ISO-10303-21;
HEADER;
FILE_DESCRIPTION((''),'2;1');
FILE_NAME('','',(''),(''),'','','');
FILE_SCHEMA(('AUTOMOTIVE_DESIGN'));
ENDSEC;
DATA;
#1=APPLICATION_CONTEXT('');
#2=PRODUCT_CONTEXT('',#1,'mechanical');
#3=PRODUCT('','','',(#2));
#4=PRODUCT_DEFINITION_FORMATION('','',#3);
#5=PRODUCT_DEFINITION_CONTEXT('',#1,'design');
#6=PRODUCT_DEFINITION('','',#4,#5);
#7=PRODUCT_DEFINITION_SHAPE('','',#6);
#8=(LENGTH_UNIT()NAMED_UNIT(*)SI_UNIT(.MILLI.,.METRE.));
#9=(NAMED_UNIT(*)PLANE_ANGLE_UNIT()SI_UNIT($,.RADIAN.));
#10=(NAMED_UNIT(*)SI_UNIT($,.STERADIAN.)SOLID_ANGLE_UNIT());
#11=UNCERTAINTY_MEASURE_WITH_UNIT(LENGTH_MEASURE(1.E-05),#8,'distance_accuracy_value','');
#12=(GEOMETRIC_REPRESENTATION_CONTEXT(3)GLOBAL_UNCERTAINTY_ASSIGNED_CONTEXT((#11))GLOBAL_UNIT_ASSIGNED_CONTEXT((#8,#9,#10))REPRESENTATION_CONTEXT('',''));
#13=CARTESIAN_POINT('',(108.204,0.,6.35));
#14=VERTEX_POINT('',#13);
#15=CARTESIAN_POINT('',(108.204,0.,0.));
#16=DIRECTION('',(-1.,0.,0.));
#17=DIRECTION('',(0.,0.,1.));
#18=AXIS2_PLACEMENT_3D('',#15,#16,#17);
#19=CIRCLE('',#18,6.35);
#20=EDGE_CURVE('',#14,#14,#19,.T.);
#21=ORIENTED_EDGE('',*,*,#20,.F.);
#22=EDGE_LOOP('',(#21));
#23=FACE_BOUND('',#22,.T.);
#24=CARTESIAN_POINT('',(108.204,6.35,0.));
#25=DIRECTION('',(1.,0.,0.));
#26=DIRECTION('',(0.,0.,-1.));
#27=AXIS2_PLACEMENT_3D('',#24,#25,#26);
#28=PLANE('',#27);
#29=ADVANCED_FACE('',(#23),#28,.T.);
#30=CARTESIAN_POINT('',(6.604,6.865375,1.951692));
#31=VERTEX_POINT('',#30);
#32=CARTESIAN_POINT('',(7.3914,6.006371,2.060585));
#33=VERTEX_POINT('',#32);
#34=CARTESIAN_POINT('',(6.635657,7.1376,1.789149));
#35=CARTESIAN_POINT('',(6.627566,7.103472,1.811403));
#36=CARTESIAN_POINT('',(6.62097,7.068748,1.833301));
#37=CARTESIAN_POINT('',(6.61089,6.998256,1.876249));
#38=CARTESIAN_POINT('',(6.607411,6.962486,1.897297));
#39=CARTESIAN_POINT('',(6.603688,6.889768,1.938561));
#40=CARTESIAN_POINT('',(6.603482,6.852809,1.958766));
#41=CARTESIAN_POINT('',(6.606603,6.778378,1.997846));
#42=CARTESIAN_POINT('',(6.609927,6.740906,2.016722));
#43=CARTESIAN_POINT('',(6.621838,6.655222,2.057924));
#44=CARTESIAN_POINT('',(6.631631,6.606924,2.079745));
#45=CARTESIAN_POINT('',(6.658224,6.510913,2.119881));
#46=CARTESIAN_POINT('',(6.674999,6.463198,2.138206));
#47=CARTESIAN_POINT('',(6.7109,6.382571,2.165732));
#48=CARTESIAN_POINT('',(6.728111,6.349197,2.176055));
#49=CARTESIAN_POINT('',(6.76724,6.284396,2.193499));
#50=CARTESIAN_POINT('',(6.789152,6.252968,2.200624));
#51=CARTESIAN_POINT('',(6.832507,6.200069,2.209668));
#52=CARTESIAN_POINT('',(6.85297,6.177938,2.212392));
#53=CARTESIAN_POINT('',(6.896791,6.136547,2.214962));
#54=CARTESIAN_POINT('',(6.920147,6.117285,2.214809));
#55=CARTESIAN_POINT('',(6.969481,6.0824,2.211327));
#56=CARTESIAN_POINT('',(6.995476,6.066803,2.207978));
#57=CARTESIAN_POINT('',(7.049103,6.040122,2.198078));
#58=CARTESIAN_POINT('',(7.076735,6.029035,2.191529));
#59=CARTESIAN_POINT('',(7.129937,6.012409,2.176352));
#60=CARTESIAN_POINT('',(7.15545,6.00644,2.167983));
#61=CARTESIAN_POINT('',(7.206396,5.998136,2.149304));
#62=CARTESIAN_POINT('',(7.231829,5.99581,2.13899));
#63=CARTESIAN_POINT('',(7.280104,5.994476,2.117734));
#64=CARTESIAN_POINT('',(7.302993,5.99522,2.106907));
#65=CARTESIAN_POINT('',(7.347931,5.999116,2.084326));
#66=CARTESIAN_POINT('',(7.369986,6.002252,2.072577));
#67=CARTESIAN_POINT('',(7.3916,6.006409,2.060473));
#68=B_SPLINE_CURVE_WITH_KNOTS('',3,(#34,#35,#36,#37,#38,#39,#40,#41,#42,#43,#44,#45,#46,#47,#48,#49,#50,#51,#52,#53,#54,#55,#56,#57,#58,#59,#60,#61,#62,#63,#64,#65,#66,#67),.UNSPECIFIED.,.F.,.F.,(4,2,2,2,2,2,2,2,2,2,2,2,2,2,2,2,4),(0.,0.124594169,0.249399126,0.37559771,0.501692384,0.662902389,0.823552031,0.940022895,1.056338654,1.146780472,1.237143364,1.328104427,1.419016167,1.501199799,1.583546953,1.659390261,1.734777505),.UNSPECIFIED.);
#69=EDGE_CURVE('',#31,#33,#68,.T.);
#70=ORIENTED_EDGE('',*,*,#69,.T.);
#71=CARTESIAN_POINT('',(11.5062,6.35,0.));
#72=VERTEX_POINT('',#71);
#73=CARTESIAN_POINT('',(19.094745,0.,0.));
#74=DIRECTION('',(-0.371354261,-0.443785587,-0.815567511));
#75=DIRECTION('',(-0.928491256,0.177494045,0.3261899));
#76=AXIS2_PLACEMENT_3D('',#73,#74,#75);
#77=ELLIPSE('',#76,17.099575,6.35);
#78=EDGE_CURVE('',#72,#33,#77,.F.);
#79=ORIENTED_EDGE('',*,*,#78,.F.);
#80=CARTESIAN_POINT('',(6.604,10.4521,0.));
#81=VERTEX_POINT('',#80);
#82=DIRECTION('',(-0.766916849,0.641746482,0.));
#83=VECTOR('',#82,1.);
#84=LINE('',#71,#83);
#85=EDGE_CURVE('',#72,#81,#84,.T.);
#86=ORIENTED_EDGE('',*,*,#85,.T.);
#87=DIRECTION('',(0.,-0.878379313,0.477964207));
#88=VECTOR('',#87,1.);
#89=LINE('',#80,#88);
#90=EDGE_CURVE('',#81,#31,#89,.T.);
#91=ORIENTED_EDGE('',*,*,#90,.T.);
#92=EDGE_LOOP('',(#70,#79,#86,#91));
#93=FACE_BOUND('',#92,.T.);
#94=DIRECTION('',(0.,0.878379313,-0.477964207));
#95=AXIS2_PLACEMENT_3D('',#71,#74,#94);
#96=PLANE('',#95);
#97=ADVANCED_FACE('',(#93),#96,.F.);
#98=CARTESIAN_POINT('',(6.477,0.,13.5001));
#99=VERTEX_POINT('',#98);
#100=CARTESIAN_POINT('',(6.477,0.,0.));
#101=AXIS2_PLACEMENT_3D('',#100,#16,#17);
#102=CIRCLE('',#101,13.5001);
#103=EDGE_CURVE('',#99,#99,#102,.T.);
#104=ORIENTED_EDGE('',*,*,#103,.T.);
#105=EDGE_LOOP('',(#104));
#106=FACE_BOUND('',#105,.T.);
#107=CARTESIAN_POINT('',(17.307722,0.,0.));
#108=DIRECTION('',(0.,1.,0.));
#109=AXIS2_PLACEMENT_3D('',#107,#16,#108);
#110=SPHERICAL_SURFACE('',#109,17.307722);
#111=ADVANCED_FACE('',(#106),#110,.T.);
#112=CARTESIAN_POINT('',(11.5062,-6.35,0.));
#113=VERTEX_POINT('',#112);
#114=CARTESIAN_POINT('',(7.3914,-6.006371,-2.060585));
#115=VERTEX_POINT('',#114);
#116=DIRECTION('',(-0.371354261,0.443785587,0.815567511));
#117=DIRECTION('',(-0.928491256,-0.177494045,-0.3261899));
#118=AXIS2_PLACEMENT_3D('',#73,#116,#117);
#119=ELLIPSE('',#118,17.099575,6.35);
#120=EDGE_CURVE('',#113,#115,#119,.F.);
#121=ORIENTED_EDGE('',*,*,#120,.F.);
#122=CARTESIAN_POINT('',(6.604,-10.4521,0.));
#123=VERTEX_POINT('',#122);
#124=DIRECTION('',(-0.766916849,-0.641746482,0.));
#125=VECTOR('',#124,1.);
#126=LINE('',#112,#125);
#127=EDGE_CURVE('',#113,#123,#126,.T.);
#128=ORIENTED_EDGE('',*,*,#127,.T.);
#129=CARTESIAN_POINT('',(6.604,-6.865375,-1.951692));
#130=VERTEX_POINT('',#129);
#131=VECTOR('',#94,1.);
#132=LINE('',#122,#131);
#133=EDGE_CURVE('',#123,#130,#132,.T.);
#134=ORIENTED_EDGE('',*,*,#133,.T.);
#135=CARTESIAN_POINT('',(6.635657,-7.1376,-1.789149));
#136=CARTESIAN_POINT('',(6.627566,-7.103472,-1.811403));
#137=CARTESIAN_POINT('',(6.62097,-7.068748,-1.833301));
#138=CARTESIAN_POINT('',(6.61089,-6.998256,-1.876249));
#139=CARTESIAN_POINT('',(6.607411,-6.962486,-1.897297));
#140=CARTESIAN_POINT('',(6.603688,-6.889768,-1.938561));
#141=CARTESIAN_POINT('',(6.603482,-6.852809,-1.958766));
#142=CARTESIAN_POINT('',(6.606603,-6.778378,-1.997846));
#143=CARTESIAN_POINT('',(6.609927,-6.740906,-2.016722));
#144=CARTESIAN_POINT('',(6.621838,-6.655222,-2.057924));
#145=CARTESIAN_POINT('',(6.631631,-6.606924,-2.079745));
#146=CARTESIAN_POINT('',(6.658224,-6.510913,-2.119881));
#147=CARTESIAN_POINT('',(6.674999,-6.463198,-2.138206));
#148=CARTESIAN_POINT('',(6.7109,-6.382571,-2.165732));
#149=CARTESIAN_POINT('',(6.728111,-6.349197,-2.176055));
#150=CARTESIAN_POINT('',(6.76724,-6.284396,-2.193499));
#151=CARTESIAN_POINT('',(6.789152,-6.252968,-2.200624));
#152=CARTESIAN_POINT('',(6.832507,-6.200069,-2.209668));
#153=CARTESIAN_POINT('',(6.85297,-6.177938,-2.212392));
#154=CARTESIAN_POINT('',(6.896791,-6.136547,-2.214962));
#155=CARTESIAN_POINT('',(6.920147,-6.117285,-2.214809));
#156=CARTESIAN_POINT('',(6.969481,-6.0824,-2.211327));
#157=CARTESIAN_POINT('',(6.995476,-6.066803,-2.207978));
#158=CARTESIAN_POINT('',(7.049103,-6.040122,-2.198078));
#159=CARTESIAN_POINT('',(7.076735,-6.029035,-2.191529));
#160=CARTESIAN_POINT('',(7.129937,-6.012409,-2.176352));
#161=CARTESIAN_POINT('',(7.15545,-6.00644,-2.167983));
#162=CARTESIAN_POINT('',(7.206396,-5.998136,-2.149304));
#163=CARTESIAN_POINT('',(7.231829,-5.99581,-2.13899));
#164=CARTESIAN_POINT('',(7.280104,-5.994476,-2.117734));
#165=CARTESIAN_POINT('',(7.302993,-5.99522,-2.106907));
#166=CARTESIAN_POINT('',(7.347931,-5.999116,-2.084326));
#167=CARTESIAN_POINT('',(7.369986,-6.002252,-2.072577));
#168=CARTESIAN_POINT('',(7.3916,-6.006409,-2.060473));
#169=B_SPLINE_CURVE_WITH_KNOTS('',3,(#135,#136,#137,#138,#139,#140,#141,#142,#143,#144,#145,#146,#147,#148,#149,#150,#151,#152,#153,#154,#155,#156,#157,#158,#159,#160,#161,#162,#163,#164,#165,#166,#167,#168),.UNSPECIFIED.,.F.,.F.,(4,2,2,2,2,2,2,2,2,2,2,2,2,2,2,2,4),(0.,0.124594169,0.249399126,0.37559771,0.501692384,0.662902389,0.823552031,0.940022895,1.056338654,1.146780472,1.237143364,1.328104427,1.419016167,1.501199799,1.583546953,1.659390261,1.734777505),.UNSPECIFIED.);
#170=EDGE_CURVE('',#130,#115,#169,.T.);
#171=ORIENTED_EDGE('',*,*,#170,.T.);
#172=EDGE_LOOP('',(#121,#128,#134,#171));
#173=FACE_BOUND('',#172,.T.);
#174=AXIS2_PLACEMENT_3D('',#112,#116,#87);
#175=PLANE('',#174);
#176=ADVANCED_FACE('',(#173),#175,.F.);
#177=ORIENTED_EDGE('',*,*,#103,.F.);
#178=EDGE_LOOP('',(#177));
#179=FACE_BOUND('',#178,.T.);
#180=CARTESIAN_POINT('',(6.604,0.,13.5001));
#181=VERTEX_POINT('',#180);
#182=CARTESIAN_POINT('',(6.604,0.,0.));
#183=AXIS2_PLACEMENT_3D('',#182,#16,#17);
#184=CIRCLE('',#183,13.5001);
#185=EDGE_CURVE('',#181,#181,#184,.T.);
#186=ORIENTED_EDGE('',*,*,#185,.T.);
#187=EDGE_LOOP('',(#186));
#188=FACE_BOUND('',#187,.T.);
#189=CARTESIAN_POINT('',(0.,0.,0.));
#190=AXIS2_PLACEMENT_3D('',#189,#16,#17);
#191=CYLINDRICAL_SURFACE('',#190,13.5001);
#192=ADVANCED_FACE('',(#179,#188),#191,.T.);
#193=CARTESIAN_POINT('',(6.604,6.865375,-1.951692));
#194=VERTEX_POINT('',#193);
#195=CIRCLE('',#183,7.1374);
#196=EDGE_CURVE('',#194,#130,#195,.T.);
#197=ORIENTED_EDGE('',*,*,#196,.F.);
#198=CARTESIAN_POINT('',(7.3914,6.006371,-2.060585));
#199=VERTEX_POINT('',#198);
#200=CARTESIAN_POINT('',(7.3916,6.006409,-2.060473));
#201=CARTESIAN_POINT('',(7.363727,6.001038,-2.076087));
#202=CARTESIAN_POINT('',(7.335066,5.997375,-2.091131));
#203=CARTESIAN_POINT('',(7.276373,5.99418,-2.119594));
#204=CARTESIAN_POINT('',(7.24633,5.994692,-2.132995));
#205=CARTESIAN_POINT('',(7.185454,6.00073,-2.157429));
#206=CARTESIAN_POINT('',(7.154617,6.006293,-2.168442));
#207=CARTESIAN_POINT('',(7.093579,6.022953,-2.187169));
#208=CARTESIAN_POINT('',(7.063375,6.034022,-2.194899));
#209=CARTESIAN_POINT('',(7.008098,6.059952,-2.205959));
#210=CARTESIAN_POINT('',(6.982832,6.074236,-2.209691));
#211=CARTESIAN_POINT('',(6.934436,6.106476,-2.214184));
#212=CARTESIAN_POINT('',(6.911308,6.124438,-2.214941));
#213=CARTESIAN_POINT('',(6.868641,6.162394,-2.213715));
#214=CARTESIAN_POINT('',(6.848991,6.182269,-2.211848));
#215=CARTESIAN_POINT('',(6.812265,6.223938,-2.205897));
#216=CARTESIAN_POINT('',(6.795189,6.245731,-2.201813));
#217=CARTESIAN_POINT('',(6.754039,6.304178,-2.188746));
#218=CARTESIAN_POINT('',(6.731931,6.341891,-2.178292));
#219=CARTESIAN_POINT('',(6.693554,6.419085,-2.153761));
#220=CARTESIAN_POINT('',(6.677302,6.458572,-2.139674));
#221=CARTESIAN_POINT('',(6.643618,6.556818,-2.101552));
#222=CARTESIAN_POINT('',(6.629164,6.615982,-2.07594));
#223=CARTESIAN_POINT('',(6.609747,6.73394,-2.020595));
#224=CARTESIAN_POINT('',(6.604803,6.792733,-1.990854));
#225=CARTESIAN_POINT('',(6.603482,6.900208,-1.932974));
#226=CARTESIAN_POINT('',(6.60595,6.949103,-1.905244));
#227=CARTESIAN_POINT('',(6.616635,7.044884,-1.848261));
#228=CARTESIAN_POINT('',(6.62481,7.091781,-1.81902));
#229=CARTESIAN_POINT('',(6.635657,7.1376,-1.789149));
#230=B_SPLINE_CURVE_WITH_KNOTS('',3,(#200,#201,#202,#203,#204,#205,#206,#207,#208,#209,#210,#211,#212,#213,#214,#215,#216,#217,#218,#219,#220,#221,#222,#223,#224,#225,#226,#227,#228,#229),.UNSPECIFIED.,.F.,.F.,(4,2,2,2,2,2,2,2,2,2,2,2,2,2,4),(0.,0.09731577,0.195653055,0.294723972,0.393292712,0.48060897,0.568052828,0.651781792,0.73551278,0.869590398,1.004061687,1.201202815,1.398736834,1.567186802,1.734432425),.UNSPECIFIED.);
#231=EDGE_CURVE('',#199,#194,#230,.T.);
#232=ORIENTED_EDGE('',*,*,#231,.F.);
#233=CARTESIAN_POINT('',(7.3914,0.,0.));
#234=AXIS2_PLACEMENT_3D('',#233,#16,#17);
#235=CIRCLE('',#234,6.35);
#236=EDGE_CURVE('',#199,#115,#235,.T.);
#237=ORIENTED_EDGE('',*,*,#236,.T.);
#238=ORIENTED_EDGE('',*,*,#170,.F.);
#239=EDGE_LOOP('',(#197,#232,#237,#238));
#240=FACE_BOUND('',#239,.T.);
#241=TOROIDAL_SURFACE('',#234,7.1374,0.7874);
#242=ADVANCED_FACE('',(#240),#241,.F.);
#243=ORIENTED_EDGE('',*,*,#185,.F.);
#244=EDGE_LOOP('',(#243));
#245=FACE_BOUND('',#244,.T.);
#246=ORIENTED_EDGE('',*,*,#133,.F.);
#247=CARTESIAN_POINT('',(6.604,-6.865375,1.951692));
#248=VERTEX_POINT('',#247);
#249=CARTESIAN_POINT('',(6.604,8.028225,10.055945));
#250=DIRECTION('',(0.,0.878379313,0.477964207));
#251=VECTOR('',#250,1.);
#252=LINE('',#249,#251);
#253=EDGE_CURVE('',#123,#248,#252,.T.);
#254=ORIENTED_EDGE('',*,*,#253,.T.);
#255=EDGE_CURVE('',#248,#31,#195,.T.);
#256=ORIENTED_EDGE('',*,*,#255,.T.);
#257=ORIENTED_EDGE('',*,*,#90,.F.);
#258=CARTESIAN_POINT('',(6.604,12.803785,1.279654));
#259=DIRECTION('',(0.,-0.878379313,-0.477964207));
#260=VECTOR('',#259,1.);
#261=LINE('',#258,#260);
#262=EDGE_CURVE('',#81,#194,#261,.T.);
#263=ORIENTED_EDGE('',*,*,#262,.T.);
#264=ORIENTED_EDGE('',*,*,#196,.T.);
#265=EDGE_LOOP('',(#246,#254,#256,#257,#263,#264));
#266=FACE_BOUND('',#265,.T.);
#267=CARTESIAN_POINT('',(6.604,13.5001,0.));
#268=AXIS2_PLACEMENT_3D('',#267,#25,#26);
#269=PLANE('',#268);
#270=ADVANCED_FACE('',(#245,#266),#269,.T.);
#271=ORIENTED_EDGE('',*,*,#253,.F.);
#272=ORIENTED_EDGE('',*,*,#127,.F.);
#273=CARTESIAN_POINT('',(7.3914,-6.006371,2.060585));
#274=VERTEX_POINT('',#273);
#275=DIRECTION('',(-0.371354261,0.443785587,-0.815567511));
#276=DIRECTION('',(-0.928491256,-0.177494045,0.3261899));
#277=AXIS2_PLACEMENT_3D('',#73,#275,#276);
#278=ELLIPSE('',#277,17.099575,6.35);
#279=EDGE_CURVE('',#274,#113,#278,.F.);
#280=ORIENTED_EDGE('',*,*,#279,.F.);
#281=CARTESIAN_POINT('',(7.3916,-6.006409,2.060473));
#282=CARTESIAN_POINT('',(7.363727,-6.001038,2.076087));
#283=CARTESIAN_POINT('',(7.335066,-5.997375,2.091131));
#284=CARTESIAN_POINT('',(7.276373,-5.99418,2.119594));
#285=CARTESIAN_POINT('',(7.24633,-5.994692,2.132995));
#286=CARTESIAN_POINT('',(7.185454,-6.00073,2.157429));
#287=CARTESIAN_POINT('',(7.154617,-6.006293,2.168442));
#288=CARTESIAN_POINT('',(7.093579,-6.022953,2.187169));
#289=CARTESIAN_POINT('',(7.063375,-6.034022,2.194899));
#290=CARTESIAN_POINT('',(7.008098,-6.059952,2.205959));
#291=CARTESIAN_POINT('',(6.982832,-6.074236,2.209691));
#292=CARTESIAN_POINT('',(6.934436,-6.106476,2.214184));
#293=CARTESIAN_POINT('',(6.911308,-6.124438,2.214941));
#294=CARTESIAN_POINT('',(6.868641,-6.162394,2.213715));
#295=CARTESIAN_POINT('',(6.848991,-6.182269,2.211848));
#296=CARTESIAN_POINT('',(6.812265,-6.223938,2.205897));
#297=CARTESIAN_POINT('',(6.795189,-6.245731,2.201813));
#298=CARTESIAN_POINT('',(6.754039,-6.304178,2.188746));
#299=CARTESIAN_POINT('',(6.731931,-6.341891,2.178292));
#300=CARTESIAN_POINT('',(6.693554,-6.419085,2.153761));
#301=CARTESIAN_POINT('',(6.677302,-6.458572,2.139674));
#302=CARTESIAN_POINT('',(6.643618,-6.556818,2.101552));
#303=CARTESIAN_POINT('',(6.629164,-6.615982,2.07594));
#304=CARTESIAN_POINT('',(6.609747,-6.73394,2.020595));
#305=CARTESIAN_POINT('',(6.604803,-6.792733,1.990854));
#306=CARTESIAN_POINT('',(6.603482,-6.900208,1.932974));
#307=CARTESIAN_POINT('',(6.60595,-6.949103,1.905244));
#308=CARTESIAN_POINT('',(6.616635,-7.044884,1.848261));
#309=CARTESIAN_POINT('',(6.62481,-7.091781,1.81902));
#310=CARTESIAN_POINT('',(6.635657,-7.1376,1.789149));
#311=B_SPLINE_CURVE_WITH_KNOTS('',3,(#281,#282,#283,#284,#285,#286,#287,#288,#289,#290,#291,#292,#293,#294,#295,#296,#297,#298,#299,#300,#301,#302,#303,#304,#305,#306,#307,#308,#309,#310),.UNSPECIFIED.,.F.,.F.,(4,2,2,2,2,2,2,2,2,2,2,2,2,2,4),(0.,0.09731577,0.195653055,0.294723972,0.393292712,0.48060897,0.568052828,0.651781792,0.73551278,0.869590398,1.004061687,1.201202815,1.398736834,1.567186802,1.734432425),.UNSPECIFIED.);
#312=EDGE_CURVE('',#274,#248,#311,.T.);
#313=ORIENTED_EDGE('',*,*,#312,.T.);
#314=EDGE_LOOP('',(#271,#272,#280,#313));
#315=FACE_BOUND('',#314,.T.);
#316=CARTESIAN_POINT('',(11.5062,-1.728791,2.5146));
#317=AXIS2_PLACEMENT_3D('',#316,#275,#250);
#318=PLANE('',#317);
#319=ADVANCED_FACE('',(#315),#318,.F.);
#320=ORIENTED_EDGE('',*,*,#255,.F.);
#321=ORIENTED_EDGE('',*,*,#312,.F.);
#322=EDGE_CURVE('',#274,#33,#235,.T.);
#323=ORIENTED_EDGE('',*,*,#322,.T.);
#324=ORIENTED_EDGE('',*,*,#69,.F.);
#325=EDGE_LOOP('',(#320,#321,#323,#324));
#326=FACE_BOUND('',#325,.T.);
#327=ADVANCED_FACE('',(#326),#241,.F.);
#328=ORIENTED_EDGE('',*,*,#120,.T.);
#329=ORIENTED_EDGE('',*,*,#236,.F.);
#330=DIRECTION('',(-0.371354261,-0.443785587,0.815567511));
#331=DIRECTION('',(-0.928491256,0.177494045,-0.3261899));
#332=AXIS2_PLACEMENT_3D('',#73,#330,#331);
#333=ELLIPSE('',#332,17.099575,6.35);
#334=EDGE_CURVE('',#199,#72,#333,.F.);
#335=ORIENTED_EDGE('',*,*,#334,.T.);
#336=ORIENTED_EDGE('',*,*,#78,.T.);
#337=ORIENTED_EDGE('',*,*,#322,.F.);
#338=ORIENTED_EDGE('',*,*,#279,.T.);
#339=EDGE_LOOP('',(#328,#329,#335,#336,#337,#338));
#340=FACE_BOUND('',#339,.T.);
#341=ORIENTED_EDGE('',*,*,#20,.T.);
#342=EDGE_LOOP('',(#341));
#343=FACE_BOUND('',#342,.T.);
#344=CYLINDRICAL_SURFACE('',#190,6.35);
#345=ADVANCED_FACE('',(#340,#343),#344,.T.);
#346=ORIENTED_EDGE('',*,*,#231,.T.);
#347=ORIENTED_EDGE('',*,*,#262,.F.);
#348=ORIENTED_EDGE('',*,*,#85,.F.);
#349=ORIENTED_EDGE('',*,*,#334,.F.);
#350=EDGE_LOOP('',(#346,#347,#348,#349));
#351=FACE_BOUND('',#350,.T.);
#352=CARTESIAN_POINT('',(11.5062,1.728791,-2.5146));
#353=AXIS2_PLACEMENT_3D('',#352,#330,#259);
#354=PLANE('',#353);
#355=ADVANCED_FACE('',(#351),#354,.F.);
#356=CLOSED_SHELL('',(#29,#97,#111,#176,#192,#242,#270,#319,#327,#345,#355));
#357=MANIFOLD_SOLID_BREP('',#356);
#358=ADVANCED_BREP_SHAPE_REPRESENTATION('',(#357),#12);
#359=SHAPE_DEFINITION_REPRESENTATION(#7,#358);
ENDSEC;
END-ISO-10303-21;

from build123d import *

# Parameters (mm, degrees)
CIRPATTERN1_COUNT = 2


with BuildPart() as part:
    # ThreadSchematic: read off the stored shape, not the designer's step
    # ThreadSchematic outline → ThreadSchematic (revolve)
    with BuildSketch(Plane.YX):
        with BuildLine():
            Line((0, 108.204), (0, 0))
            ThreePointArc((0, 0), (7.486725405, 1.703037349), (13.500100004, 6.477000005))
            Line((13.500100004, 6.477000005), (13.5001, 6.604))
            Line((13.5001, 6.604), (7.1374, 6.604))
            ThreePointArc((7.1374, 6.604), (6.58062412, 6.83462412), (6.35, 7.3914))
            Line((6.35, 7.3914), (6.35, 108.204))
            Line((6.35, 108.204), (0, 108.204))
        make_face()
    revolve(axis=Axis((0, 0, 0), (1, 0, 0)))

    # Boss-Sweep2: sweep along a path in Sketch3
    with BuildLine(Plane.XY) as boss_sweep2_path:
        Line((6.604, 10.4521), (11.5062, 6.35))
    # Sketch4 → Boss-Sweep2 (sweep)
    with BuildSketch(Plane(origin=(6.604, 0, 0), x_dir=(0, 0, -1), z_dir=(1, 0, 0))):
        Polygon((0, 10.4521), (-2.5146, 5.830890742), (2.5146, 5.830890742), align=None)
    boss_sweep2 = sweep(path=boss_sweep2_path.line)

    # CirPattern1: Boss-Sweep2 ×2 about axis
    cirpattern1_axis = Axis((0, 0, 0), (1, 0, 0))
    for i in range(1, CIRPATTERN1_COUNT):
        add(boss_sweep2.rotate(cirpattern1_axis, i * 360 / CIRPATTERN1_COUNT))


solid = part.part
